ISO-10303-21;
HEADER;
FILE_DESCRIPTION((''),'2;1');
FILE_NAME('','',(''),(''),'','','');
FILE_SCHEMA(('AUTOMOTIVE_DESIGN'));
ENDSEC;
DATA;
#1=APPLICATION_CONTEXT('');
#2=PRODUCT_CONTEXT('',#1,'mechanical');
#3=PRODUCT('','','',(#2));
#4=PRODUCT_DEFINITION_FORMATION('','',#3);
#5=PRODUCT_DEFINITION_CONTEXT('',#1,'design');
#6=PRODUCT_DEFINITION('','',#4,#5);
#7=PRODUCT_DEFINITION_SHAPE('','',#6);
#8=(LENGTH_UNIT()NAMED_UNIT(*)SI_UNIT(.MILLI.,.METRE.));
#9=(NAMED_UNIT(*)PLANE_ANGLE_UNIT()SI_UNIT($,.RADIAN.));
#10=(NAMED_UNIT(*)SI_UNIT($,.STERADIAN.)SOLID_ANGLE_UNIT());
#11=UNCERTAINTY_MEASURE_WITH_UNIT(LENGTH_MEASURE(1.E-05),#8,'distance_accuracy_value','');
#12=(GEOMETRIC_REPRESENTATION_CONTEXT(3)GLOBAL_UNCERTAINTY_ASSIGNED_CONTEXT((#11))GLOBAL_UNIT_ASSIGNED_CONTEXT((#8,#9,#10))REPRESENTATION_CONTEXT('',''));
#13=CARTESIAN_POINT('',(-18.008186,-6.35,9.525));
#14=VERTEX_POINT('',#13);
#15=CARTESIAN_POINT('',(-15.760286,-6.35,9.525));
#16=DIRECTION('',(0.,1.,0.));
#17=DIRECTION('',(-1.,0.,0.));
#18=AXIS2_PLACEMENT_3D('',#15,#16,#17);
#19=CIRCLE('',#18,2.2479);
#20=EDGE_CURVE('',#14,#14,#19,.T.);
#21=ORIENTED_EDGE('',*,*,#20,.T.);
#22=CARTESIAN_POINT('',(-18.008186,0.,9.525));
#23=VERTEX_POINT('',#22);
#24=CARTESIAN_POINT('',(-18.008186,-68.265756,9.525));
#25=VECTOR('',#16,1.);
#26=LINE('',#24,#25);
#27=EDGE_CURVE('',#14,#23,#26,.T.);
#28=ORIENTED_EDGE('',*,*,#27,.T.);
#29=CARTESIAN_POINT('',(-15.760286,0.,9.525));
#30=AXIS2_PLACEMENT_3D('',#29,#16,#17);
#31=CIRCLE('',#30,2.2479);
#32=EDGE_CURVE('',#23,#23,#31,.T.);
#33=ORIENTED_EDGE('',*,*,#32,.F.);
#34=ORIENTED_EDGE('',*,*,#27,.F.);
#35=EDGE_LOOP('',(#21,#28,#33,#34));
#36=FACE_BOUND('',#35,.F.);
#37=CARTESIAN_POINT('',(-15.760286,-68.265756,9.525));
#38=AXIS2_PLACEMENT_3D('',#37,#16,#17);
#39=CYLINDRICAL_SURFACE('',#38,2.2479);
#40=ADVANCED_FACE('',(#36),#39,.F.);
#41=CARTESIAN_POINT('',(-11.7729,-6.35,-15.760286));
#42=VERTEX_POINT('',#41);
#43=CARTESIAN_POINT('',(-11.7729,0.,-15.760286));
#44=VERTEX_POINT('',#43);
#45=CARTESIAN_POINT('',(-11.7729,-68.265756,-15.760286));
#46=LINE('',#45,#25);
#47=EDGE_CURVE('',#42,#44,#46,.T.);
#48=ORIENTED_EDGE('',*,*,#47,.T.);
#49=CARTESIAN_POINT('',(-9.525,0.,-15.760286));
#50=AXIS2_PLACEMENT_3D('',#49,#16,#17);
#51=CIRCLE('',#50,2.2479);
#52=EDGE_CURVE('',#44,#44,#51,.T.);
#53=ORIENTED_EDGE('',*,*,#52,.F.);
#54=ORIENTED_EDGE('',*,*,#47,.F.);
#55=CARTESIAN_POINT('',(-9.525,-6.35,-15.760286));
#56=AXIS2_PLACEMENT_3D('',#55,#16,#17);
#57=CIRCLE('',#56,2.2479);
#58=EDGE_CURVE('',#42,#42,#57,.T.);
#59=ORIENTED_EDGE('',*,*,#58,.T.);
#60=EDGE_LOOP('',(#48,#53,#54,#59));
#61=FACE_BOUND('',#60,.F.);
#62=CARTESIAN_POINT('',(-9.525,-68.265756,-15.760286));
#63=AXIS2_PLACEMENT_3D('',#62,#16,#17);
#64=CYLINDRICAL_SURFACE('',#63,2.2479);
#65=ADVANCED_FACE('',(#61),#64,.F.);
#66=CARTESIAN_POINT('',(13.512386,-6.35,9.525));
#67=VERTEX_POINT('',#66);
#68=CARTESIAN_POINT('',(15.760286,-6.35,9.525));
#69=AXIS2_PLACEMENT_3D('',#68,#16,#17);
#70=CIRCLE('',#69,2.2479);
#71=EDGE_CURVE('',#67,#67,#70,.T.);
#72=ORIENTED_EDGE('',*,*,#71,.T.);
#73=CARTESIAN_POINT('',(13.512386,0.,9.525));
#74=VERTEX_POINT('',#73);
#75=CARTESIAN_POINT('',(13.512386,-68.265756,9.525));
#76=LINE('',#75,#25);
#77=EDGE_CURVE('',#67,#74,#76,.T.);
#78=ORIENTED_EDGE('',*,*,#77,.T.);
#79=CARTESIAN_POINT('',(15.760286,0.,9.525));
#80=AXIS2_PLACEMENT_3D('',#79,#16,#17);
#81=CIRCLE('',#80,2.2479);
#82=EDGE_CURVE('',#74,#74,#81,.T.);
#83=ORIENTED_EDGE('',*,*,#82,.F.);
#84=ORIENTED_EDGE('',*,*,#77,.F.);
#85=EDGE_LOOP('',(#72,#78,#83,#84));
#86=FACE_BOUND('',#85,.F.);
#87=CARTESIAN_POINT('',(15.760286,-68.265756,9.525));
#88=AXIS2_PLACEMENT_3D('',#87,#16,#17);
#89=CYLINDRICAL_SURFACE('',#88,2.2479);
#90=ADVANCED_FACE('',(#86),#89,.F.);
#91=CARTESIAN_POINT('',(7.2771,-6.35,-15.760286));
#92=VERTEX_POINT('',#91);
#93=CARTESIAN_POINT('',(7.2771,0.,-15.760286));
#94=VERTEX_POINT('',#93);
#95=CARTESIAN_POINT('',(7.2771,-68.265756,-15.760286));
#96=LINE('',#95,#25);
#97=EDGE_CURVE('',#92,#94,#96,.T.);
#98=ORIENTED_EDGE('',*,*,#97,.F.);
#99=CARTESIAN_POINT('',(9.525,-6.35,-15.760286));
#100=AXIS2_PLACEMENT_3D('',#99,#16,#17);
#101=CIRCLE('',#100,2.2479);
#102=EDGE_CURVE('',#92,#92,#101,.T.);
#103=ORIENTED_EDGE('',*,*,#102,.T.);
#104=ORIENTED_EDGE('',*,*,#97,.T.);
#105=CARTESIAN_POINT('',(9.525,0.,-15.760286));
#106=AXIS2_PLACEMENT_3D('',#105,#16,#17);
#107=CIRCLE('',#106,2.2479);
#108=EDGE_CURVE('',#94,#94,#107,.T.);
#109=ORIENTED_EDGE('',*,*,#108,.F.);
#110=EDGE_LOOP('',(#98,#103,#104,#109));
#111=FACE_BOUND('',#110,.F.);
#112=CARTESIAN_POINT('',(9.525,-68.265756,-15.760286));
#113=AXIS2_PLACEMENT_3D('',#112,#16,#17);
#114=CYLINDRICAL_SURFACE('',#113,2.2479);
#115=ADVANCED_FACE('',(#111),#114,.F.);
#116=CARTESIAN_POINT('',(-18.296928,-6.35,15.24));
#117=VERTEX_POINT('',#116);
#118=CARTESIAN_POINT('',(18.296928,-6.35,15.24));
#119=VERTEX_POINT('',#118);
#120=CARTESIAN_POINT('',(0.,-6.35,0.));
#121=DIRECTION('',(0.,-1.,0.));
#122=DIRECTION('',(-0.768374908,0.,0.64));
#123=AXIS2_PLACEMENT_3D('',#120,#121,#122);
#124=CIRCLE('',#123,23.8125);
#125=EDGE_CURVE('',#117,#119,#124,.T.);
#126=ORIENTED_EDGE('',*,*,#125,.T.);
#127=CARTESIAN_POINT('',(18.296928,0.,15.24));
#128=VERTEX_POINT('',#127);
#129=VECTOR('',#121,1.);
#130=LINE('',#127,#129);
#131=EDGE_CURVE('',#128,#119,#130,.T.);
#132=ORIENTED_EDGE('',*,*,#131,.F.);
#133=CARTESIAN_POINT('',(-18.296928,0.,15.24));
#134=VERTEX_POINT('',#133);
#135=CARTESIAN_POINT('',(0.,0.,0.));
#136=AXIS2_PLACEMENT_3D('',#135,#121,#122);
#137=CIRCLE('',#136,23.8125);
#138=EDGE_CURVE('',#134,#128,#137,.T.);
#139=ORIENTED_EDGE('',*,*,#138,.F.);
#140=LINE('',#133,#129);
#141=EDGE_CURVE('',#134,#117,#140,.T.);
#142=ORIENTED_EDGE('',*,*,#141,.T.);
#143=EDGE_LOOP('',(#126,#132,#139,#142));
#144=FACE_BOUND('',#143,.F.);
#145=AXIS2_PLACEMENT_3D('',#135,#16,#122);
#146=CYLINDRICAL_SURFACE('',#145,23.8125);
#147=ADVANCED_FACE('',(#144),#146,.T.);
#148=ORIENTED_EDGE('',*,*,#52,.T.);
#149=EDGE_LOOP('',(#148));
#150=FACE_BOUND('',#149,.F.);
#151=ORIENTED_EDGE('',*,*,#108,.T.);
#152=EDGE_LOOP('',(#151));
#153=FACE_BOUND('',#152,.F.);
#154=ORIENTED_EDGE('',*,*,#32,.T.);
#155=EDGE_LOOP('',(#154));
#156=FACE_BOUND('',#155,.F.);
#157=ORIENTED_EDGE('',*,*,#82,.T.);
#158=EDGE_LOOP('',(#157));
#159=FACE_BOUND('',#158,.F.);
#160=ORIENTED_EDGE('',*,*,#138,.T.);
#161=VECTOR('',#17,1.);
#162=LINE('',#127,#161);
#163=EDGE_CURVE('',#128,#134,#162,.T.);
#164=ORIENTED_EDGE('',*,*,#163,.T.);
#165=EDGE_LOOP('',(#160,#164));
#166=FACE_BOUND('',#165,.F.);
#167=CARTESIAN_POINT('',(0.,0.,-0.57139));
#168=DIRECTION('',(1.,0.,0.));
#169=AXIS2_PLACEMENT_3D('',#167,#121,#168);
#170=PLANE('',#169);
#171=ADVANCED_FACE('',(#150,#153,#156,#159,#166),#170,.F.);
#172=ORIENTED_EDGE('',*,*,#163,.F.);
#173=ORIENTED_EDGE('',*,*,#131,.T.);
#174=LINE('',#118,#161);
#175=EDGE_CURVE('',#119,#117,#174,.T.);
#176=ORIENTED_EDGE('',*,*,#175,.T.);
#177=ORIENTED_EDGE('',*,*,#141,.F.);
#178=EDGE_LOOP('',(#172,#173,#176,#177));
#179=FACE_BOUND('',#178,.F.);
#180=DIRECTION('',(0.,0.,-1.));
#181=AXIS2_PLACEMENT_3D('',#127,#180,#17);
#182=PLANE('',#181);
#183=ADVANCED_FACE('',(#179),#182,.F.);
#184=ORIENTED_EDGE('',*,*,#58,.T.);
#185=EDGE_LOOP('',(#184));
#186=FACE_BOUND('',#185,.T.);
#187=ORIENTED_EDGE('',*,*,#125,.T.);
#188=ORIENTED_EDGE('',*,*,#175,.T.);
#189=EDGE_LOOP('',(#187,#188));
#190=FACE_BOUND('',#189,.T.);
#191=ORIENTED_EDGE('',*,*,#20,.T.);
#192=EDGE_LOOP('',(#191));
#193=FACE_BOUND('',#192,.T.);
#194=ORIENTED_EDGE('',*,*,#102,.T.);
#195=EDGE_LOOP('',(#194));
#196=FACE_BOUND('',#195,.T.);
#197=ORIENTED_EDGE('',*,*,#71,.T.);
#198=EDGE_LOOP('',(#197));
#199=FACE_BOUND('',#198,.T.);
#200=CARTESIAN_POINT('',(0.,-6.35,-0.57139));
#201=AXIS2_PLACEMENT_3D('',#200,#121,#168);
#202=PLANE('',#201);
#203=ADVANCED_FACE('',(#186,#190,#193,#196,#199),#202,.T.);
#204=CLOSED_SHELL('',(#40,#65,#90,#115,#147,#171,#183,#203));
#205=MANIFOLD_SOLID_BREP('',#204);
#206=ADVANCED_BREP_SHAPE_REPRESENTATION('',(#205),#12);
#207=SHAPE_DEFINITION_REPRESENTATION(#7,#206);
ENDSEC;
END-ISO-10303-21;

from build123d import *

# Parameters (mm, degrees)
F1_DEPTH = 6.35
F3_D     = 4.4958


with BuildPart() as f1:
    # F0 (on Front) → F1 (new body)
    with BuildSketch(Plane.XZ):
        with BuildLine():
            Line((18.2969275085, 15.24), (-18.2969275085, 15.24))
            ThreePointArc((-18.2969275085, 15.24), (0, -23.8125), (18.2969275085, 15.24))
        make_face()
    extrude(amount=F1_DEPTH)

    # F3 (through all)
    with Locations(Plane.XZ.offset(6.35)):
        with Locations((-15.7602855304, 9.525), (15.7602855304, 9.525), (9.525, -15.7602855304), (-9.525, -15.7602855304)):
            Hole(F3_D / 2)


solid = f1.part
